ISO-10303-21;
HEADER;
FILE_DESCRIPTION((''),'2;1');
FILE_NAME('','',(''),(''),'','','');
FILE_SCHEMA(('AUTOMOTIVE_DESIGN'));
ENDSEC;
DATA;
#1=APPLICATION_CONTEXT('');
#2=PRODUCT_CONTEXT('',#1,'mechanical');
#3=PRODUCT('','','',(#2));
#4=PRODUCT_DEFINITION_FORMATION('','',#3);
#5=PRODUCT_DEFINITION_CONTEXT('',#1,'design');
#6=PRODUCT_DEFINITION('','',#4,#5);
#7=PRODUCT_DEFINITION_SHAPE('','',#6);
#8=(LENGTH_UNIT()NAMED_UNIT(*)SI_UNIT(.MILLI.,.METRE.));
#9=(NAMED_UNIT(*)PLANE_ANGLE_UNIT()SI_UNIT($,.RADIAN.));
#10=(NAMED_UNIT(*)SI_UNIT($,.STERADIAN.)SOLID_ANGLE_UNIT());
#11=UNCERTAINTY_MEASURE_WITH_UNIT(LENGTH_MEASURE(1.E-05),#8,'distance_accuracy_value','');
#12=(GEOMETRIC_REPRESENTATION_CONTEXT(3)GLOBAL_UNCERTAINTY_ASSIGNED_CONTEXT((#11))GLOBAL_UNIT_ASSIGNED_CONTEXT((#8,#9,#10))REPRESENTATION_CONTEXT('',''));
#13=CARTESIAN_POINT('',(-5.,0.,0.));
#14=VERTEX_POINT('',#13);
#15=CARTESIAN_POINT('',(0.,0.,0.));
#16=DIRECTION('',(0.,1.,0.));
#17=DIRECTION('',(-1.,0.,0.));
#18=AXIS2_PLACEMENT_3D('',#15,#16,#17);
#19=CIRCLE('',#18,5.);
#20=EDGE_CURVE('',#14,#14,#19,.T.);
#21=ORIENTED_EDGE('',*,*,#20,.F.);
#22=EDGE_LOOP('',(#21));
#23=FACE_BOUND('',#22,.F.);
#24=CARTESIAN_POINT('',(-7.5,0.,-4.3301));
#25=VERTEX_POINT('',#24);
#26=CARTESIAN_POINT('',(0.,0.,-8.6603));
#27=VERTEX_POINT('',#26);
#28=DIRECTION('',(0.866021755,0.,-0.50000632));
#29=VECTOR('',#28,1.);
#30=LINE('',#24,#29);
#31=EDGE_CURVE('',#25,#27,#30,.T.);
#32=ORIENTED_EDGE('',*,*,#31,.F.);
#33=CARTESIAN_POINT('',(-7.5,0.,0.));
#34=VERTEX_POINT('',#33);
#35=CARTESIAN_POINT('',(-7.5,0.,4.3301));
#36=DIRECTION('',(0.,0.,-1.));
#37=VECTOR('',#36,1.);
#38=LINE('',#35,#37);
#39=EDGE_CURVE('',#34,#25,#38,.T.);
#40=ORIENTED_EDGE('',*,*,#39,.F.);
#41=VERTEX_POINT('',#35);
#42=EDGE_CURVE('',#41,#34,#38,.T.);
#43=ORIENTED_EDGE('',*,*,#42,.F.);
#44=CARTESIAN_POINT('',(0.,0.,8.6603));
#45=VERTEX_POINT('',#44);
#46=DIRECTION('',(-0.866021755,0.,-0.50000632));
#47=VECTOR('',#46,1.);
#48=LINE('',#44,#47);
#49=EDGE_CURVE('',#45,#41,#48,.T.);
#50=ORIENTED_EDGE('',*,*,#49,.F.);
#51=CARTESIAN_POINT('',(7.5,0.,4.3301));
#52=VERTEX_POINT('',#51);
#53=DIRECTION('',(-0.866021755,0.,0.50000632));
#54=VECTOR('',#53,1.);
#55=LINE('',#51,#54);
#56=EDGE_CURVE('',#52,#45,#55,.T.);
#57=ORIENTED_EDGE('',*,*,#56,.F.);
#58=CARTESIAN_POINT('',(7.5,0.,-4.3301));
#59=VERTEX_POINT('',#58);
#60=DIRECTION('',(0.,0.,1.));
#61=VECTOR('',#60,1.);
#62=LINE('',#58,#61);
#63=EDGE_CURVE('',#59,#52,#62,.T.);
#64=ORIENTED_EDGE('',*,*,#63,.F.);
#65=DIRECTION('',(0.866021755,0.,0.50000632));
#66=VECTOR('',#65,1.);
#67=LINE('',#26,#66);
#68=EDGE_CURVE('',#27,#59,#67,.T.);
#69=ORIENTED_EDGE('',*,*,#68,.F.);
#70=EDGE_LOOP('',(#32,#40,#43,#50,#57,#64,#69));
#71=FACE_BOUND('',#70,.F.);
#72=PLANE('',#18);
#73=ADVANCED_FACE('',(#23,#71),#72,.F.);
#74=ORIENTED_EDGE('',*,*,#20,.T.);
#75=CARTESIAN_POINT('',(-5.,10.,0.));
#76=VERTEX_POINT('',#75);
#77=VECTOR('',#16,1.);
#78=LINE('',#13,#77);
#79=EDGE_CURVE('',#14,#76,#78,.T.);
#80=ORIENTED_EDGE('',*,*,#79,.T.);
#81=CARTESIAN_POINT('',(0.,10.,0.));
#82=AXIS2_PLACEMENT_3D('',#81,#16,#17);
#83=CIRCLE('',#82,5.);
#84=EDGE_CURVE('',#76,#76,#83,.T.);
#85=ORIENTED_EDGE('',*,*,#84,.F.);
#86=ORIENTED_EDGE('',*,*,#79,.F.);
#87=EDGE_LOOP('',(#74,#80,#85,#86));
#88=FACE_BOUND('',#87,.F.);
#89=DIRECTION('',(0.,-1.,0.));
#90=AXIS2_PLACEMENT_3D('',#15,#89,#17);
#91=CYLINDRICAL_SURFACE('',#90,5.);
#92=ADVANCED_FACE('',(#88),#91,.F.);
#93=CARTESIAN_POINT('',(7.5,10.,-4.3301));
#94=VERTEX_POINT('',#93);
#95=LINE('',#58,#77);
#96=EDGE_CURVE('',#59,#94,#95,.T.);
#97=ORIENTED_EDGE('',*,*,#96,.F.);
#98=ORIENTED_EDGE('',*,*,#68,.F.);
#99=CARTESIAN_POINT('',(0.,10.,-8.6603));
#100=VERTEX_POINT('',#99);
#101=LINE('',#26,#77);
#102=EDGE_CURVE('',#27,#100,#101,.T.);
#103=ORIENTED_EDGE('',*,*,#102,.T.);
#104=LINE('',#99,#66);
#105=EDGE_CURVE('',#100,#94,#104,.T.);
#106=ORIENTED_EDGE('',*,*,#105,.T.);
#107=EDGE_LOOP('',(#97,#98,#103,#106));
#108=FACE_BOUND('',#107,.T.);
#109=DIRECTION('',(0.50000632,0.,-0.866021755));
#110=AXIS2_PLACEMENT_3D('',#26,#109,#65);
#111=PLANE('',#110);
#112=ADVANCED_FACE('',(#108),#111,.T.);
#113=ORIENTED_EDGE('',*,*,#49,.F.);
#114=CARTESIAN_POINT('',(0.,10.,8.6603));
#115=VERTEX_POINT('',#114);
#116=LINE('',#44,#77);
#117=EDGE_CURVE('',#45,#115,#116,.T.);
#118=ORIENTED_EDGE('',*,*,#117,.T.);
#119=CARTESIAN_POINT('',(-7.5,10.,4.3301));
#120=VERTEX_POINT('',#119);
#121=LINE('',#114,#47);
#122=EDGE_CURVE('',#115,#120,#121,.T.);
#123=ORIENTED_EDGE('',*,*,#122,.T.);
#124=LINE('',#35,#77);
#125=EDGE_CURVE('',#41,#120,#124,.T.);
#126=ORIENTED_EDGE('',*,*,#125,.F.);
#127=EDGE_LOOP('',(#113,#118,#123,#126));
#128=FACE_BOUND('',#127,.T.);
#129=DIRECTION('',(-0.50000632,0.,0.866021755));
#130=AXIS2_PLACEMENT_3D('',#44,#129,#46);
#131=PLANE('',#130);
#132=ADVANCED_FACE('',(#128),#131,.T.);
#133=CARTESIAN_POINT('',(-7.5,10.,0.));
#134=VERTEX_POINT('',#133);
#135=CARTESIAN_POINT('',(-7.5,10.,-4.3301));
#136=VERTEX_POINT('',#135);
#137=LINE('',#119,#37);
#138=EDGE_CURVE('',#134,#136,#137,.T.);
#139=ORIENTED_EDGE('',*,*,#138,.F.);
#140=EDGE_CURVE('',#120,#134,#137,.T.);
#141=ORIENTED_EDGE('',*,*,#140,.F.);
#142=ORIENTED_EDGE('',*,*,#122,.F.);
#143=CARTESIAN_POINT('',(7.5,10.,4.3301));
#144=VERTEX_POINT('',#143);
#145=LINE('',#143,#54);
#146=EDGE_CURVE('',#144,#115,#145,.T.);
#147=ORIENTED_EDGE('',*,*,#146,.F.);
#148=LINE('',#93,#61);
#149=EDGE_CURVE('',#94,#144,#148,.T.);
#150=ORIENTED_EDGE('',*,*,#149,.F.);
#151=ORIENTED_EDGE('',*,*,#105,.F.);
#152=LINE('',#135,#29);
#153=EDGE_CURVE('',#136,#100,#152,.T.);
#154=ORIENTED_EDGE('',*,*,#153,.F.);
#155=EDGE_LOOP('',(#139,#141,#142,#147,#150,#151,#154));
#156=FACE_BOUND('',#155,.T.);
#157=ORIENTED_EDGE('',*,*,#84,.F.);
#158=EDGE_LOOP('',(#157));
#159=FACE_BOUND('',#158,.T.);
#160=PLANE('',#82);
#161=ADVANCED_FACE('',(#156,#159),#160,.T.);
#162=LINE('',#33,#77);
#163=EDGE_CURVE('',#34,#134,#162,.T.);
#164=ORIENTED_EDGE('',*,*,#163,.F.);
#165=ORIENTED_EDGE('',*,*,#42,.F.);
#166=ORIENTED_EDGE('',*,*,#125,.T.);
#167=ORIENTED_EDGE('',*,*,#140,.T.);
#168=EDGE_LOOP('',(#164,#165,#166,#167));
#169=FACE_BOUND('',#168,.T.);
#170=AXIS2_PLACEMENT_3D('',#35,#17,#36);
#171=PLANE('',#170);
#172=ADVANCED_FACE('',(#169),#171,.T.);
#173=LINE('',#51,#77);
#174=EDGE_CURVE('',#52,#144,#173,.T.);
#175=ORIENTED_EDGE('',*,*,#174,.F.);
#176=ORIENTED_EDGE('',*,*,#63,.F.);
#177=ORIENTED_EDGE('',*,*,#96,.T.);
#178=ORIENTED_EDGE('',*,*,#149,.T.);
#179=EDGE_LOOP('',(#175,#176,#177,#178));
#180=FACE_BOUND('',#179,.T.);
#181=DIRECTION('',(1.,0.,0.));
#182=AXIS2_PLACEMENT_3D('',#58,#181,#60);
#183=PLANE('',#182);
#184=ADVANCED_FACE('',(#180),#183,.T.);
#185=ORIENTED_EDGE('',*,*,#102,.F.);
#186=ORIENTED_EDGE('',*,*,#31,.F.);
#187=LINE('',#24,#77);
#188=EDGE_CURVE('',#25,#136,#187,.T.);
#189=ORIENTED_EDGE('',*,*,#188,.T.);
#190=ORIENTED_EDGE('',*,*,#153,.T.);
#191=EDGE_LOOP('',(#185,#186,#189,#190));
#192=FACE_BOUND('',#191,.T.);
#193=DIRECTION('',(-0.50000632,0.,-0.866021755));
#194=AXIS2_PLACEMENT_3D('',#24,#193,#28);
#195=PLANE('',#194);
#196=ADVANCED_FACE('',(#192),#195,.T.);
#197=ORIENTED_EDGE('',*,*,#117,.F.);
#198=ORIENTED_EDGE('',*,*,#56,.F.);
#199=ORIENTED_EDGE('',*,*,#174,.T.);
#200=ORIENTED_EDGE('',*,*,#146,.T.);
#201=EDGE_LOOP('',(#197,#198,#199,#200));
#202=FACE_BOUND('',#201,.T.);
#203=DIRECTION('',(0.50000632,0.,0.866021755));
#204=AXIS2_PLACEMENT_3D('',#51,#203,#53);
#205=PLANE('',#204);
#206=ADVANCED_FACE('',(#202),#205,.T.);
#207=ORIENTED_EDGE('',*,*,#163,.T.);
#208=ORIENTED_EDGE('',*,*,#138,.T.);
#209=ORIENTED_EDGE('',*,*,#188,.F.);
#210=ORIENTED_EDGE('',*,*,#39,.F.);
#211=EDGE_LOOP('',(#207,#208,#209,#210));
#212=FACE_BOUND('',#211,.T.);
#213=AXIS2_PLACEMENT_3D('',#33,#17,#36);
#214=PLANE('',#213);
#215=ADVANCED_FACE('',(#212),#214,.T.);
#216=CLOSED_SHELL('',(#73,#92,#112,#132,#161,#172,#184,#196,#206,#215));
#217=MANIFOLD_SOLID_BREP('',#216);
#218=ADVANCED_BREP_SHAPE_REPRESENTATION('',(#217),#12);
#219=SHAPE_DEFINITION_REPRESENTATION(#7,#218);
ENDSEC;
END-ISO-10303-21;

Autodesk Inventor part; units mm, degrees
ref_plane "YZ Plane" through (0, 0, 0) normal (1, 0, 0) x (0, 1, 0)
ref_plane "XZ Plane" through (0, 0, 0) normal (0, 1, 0) x (-1, 0, 0)
ref_plane "XY Plane" through (0, 0, 0) normal (0, 0, 1) x (1, 0, 0)
sketch "Szkic1" plane through (0, 0, 0) normal (0, 1, 0) x (-1, 0, 0)
  circle A0 centre (0, 0) radius 5
  line L0 (7.5, 0) -> (5, 0)
  line L1 (7.5, -4.3301) -> (0, -8.6603)
  line L2 (0, -8.6603) -> (-7.5, -4.3301)
  line L3 (-7.5, -4.3301) -> (-7.5, 4.3301)
  line L4 (-7.5, 4.3301) -> (0, 8.6603)
  line L5 (0, 8.6603) -> (7.5, 4.3301)
  line L6 (7.5, 4.3301) -> (7.5, -4.3301)
extrude "Wyciągnięcie proste1" add sketch "Szkic1" along normal blind 10
thread "Gwint1" size "TR10x2" class "7H" standard "ISO Metric Trapezoidal Threads" full length
properties part number "Nakrętka trapezowa 10x17"
